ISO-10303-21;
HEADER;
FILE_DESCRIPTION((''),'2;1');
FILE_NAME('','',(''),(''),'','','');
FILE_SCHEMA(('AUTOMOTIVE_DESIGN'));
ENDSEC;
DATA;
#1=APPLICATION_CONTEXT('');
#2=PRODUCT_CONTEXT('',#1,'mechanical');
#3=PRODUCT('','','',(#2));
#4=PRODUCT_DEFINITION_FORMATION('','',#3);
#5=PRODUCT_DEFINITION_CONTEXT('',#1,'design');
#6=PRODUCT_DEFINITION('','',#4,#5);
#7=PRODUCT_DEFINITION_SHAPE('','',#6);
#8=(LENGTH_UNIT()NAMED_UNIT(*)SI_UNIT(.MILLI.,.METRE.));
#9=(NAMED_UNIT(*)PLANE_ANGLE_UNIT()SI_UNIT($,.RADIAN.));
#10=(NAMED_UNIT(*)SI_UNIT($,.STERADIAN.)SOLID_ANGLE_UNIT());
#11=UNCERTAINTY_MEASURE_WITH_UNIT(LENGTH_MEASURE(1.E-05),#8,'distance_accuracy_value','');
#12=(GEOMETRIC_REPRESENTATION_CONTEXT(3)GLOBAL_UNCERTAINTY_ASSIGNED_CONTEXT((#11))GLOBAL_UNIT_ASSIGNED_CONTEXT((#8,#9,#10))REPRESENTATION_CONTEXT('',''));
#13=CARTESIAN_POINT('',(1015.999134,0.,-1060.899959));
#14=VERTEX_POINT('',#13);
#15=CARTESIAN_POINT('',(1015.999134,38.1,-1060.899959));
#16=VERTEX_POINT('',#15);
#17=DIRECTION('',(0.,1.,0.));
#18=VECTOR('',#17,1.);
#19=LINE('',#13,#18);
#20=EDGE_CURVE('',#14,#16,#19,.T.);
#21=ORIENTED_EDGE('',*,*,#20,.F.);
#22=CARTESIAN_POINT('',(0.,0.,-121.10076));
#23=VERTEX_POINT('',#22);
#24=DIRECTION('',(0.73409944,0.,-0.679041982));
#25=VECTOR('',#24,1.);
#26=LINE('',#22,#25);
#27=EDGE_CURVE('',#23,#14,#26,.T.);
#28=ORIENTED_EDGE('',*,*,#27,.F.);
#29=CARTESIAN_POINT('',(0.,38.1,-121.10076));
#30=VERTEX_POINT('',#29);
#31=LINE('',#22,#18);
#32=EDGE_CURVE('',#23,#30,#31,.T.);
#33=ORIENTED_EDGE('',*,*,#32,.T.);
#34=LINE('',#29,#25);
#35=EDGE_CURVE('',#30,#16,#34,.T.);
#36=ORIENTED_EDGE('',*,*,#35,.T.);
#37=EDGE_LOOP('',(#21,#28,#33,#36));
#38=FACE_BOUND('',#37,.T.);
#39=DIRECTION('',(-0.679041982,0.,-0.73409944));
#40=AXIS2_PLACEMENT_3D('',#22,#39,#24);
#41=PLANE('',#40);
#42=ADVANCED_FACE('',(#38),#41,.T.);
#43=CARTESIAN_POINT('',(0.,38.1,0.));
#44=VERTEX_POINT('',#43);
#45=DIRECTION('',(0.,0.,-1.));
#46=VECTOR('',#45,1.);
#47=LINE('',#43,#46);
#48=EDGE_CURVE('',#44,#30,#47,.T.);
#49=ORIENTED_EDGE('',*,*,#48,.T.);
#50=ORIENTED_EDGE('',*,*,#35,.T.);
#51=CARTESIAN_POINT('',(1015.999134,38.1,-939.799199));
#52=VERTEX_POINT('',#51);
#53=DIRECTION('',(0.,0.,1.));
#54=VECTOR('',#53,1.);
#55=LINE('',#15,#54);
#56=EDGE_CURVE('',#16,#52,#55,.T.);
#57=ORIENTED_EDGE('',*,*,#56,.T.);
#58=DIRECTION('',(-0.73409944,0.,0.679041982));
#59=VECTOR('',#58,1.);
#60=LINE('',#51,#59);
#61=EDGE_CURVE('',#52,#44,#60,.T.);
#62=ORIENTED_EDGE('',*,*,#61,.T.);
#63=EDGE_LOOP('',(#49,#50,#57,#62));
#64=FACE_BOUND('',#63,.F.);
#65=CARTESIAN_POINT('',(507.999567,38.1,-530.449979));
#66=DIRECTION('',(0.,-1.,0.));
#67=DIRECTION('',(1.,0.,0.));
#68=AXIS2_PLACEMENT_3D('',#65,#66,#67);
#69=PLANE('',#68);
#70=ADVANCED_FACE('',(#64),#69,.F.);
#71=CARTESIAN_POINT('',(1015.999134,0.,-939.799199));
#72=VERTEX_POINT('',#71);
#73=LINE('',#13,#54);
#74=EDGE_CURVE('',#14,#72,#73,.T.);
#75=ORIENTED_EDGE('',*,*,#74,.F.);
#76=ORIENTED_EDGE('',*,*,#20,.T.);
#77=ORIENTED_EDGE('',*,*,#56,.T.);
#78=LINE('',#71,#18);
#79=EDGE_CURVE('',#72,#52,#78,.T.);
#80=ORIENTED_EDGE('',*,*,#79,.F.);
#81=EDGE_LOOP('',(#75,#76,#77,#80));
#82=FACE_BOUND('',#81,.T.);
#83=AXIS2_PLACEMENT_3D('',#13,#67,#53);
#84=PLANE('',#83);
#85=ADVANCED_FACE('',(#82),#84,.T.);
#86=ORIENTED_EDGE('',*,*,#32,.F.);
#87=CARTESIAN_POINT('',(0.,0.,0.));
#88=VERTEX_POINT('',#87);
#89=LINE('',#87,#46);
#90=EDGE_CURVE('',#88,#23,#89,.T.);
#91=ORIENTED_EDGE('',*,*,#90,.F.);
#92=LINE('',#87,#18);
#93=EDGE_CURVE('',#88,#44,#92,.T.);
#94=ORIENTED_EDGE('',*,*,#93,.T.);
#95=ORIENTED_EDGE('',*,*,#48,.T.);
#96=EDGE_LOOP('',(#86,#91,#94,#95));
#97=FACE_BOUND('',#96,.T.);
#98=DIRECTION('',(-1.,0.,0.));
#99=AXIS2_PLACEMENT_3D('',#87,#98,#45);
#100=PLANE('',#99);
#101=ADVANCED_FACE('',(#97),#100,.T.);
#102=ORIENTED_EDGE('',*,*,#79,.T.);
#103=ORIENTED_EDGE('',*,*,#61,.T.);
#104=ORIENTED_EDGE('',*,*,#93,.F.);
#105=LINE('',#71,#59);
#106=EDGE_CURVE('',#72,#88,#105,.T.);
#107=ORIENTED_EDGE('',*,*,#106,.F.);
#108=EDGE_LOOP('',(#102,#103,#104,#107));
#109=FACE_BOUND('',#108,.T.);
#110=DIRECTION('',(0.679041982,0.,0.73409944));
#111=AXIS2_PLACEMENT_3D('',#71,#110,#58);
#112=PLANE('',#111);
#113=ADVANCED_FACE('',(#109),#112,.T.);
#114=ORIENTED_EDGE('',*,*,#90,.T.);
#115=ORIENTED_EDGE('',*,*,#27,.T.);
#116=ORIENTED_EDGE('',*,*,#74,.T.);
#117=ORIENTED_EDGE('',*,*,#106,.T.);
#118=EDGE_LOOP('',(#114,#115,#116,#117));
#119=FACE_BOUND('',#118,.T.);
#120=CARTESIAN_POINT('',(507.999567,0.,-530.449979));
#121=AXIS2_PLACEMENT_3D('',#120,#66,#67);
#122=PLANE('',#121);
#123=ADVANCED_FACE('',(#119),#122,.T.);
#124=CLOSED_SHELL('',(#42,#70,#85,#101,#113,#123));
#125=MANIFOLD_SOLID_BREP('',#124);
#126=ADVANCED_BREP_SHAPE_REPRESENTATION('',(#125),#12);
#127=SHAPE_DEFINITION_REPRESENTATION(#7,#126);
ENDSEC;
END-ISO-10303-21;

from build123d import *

# Parameters (mm, degrees)
F1_DEPTH = 38.1


# Not quite as in the source:
# - a feature names something its author has since deleted; it is built from what else it names


with BuildPart() as f1:
    # F0 (on Front) → F1 (new body)
    with BuildSketch(Plane.XZ):
        Polygon((1015.9991338121, -939.7991987762), (0, 0), (0, -121.1007599326), (1015.9991338121, -1060.8999587088), align=None)
    extrude(amount=-F1_DEPTH)


solid = f1.part
